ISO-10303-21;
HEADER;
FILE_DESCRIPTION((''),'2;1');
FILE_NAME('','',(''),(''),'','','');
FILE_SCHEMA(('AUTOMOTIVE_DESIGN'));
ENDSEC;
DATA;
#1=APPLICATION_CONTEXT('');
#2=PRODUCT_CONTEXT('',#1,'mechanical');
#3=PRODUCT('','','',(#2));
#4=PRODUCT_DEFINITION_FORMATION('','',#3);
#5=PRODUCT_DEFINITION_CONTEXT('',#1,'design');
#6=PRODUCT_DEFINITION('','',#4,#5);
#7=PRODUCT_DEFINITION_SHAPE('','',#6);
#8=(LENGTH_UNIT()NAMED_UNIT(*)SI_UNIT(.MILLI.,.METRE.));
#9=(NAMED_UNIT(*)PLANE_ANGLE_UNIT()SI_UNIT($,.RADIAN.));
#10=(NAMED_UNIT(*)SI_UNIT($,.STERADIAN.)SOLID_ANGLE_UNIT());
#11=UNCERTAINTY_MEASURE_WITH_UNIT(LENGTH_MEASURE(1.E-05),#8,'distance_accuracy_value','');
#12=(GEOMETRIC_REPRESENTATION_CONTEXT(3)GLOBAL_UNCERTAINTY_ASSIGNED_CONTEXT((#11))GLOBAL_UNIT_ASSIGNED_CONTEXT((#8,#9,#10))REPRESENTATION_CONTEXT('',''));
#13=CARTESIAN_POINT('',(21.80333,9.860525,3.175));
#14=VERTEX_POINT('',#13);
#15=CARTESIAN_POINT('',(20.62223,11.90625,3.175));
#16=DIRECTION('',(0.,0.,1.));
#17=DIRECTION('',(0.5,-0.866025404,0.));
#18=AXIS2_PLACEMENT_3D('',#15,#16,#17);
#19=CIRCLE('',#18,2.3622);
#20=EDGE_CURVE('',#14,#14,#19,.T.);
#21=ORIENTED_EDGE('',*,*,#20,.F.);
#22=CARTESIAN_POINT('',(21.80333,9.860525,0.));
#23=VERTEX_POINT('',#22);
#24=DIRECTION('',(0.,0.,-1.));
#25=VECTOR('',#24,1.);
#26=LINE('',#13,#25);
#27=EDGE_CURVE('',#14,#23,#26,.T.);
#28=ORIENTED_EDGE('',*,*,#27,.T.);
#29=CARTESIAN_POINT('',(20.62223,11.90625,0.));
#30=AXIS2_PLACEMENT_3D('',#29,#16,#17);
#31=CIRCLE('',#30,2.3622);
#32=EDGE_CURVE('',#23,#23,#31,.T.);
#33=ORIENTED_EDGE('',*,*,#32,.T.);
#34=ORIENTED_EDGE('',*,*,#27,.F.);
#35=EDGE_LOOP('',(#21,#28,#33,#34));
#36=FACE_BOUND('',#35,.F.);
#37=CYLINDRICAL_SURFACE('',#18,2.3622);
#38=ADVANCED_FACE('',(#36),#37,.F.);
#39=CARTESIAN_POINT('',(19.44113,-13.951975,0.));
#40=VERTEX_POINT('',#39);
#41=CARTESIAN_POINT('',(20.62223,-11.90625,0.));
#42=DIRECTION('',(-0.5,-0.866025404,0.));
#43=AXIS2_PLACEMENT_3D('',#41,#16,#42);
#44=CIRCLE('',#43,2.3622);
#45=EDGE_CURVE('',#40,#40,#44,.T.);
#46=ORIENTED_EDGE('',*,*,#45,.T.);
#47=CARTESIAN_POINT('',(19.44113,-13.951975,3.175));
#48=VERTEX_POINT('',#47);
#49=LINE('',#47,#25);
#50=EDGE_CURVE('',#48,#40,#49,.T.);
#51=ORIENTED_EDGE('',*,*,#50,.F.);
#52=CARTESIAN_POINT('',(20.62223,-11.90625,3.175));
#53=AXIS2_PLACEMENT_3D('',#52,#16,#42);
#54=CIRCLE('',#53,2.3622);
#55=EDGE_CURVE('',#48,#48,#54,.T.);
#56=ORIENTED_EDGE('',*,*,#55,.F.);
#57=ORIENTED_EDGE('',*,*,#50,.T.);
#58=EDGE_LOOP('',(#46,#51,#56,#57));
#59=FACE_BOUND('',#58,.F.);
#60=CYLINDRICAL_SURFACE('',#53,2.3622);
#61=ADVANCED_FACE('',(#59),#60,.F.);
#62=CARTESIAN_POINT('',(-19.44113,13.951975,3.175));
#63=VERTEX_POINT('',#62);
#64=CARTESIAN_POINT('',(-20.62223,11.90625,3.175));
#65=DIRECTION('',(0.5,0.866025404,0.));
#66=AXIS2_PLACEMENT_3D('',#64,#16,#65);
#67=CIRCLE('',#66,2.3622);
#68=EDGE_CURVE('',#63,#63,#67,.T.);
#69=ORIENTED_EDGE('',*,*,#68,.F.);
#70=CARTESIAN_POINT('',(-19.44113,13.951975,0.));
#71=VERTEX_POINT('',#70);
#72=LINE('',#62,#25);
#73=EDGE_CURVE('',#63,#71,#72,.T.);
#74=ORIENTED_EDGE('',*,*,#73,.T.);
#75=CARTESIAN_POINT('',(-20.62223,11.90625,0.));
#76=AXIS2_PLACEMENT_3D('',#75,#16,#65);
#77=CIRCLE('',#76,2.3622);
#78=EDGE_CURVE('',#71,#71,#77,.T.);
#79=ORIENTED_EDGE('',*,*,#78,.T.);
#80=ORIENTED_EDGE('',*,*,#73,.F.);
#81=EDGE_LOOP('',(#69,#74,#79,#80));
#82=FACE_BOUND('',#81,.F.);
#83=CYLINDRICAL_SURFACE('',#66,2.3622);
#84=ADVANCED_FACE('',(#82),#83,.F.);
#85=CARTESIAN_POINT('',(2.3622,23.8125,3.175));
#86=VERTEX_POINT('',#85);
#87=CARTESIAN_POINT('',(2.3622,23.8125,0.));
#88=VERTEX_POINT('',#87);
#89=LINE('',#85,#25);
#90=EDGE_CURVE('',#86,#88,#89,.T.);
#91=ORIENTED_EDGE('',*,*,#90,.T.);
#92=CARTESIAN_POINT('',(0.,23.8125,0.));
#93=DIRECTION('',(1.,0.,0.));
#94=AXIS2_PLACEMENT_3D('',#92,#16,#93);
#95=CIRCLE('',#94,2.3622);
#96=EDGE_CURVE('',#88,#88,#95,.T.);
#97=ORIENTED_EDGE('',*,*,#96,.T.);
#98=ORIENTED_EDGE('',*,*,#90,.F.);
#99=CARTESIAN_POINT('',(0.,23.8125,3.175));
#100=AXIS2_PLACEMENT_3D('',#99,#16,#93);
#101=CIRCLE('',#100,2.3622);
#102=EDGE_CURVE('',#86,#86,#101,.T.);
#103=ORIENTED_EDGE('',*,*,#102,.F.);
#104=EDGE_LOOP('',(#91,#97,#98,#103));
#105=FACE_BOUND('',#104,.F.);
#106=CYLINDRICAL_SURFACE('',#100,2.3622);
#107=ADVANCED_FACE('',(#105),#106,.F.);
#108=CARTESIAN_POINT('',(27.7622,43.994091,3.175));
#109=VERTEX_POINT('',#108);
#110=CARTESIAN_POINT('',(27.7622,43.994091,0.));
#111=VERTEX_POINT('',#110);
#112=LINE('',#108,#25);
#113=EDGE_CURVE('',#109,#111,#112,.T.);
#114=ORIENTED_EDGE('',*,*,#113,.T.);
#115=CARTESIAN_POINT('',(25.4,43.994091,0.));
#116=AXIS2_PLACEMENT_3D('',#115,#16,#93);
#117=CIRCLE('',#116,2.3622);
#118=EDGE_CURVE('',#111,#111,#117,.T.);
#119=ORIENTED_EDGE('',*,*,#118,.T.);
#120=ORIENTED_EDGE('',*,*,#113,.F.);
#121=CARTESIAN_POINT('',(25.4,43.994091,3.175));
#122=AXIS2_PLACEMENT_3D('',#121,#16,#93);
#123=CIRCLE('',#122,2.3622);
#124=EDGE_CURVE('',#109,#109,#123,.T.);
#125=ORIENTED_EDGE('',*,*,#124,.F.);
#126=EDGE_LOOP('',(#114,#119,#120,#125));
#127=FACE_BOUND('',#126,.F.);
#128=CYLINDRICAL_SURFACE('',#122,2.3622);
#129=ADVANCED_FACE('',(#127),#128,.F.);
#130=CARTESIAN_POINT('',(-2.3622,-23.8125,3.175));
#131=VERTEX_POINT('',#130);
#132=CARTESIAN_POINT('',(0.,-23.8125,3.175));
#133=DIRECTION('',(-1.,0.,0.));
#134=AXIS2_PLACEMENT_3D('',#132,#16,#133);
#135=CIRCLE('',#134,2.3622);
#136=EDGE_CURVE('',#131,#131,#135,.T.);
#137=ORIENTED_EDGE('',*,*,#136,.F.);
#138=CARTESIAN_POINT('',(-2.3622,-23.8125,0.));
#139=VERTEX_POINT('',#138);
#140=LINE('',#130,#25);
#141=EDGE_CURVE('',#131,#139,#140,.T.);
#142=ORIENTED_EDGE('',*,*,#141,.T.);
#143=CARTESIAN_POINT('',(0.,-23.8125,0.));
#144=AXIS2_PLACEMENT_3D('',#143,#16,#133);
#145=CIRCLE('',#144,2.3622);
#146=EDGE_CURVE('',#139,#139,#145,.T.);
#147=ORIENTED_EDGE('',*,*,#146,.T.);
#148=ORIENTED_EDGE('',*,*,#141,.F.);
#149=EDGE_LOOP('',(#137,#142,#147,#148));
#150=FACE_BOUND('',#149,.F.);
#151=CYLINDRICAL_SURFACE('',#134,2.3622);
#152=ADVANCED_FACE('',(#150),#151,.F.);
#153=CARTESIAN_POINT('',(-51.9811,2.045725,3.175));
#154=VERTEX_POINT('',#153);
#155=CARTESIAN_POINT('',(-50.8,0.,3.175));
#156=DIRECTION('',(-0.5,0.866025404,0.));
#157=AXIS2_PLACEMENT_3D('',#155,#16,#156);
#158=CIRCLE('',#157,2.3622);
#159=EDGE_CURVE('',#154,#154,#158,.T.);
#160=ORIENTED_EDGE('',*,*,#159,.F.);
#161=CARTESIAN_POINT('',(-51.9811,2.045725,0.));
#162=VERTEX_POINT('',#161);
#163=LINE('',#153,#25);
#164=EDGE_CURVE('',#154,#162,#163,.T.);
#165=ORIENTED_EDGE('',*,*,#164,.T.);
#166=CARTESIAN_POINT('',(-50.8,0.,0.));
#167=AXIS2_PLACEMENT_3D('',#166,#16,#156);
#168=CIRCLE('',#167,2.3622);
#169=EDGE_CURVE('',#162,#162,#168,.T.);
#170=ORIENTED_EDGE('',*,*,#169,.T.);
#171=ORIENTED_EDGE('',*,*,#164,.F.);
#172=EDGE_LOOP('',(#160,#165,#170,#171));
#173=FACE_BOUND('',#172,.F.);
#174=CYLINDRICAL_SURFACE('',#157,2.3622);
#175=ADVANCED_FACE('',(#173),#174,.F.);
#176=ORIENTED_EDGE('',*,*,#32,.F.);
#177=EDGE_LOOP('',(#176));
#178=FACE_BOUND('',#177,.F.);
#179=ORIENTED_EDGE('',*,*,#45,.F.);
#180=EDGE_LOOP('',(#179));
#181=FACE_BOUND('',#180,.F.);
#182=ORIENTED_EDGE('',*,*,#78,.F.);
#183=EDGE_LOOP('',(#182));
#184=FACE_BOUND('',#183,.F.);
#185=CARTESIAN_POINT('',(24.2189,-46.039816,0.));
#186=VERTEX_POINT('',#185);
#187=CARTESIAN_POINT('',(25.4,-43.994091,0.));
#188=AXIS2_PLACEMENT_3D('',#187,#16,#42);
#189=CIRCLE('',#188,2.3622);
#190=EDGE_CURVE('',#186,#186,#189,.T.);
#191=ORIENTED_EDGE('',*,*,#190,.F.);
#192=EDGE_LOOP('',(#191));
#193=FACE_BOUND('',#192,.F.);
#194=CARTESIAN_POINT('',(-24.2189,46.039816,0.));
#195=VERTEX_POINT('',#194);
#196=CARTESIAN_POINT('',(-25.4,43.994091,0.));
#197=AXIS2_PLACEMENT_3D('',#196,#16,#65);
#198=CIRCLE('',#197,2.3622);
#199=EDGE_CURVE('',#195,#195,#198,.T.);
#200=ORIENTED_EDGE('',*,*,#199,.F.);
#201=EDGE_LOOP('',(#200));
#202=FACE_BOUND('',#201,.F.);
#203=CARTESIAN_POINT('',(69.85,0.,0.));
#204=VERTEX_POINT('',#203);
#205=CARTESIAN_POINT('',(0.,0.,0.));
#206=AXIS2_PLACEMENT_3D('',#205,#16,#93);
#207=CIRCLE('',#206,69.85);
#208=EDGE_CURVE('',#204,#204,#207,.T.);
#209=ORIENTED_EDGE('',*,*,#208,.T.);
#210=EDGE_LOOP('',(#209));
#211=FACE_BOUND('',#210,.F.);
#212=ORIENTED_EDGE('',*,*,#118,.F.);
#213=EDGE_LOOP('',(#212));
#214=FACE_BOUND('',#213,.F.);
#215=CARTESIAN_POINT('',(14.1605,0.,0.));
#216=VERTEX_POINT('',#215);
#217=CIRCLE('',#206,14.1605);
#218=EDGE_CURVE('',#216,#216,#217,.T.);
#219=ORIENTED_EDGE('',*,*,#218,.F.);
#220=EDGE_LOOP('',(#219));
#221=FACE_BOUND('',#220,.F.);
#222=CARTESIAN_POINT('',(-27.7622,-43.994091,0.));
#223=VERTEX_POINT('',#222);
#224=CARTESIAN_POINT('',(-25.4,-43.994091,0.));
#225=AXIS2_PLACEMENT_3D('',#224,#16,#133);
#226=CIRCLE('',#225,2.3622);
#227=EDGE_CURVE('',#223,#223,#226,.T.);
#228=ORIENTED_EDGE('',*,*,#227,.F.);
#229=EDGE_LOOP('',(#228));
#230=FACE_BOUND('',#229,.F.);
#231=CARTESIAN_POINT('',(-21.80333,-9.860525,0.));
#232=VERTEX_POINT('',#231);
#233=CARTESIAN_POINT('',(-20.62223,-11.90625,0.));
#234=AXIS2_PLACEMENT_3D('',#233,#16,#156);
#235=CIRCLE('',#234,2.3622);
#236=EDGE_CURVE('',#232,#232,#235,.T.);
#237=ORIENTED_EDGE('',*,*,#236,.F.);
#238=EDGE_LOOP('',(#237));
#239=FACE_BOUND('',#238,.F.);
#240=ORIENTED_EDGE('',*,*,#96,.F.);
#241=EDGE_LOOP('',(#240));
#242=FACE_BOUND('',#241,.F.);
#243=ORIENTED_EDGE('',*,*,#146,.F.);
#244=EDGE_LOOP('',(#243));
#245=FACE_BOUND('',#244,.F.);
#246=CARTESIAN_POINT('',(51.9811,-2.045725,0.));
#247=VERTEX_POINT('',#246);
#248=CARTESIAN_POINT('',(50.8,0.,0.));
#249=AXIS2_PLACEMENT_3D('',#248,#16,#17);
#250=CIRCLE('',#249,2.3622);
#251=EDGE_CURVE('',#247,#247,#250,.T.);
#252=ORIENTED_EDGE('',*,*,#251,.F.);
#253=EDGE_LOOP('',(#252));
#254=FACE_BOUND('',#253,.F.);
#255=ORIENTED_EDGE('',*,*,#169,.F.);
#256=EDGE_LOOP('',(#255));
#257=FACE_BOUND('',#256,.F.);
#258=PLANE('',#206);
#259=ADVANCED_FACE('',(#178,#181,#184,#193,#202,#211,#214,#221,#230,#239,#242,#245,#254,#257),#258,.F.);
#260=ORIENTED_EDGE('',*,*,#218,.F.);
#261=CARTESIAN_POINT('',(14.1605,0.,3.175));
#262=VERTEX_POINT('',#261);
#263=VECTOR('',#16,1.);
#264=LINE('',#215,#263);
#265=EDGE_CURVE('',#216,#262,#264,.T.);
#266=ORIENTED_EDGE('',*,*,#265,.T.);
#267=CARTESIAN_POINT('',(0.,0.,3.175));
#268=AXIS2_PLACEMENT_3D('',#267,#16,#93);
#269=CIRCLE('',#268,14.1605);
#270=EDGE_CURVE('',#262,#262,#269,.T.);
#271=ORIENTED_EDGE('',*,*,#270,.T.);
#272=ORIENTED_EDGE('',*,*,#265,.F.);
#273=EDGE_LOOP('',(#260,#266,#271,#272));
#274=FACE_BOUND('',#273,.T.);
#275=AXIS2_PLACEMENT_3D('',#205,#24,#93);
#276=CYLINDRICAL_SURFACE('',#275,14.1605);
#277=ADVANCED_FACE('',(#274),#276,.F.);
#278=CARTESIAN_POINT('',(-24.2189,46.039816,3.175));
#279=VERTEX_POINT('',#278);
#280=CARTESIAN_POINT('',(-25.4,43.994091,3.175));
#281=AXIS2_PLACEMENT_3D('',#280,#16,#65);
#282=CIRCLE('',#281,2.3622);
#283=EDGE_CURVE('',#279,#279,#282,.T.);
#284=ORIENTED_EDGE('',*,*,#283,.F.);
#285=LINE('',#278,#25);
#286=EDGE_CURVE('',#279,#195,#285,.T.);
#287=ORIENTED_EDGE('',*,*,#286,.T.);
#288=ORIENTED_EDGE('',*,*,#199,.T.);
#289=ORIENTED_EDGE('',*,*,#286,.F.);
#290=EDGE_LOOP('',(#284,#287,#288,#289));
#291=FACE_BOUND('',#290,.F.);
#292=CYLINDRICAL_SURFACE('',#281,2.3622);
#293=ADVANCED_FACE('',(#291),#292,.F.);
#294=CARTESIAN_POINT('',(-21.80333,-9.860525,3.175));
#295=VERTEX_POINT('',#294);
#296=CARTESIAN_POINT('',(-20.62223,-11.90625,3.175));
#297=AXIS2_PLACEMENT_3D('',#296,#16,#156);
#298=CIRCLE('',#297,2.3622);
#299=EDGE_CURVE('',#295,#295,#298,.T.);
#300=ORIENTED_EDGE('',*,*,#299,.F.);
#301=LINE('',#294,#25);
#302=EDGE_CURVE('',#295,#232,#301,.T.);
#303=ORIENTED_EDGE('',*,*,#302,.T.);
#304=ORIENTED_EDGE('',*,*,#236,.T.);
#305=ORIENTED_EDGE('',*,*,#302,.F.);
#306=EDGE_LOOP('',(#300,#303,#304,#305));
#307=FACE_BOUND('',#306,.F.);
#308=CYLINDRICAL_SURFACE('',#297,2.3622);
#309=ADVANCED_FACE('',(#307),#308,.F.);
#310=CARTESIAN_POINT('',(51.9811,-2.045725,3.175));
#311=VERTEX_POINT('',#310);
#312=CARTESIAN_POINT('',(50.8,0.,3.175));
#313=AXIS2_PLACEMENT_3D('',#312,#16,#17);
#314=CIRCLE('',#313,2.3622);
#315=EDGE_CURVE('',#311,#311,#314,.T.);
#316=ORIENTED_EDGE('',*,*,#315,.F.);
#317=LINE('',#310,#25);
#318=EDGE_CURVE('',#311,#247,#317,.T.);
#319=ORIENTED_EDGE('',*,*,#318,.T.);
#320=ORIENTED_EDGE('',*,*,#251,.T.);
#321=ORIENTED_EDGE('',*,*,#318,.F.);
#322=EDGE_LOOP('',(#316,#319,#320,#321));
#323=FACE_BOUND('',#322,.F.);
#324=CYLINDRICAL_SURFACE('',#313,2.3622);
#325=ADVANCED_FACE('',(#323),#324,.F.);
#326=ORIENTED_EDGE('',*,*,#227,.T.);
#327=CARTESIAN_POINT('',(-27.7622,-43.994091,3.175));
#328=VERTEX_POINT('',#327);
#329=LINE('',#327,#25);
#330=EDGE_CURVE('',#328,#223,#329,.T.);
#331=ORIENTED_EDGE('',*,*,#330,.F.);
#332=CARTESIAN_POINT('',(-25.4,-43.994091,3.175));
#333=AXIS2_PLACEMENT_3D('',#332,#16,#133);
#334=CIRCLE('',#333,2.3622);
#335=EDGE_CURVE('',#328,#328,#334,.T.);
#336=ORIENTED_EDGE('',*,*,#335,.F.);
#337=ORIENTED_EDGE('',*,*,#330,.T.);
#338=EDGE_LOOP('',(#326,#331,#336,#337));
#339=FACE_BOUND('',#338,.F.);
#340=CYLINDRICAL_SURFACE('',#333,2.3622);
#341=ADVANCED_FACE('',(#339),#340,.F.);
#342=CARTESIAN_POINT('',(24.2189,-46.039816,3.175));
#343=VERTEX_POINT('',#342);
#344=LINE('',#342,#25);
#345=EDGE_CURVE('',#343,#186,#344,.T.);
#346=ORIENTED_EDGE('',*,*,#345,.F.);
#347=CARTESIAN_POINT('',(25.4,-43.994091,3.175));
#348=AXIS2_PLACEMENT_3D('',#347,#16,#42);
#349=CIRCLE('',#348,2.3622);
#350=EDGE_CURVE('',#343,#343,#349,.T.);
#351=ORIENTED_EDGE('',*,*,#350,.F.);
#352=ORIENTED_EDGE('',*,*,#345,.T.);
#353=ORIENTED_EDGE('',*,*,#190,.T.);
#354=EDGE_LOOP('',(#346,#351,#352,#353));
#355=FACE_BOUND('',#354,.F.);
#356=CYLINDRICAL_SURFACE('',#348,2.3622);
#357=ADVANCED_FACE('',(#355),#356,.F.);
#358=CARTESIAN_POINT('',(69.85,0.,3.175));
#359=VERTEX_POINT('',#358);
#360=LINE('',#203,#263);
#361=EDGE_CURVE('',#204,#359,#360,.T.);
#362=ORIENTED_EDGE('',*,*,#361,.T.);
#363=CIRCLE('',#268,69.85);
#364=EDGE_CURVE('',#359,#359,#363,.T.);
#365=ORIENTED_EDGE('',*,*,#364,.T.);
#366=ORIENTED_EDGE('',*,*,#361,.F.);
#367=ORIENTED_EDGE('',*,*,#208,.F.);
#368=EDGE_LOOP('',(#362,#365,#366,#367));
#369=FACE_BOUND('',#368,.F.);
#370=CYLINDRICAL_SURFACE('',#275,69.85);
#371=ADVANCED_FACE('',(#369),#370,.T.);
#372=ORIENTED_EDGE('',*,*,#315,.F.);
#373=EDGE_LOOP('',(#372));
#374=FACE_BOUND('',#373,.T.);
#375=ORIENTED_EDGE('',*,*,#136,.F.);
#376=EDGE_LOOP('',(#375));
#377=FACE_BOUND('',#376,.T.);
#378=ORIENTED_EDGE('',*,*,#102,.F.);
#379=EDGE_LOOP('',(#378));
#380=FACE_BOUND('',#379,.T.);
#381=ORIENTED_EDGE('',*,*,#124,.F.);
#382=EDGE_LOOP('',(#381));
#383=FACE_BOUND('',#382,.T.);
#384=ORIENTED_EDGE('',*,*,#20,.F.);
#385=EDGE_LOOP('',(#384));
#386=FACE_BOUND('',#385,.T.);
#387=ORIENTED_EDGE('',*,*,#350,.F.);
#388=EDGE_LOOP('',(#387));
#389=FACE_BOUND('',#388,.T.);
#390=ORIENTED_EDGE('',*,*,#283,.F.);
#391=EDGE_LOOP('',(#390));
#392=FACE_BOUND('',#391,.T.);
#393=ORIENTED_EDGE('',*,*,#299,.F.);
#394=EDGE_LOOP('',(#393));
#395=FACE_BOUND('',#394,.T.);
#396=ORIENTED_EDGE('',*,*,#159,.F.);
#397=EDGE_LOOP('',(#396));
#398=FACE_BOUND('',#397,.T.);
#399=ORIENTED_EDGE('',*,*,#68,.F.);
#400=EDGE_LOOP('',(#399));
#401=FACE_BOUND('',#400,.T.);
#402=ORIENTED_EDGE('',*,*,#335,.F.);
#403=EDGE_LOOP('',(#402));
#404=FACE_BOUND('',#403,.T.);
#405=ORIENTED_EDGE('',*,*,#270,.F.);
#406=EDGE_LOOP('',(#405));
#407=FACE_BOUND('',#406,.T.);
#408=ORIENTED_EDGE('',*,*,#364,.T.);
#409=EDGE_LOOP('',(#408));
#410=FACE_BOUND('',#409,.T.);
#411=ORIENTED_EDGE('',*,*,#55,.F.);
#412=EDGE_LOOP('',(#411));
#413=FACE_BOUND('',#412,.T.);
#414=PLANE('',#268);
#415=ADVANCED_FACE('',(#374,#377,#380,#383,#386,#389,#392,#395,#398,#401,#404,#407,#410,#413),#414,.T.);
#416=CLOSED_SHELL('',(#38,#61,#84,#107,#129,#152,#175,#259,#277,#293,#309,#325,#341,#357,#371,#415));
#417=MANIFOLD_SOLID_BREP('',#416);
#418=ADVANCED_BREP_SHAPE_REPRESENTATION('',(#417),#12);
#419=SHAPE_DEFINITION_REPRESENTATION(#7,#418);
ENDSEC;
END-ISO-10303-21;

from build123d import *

# Parameters (mm, degrees)
F0_R            = 69.85
F0_R_2          = 14.1605
F1_DEPTH        = 3.175
F2_R            = 2.3622
F3_DEPTH        = 3.176
F3_COPIES_COUNT = 6


# Not quite as in the source:
# - a pattern or mirror of a feature is missing from the dataset's text; its kind, count and spacing are read off the source's solid


with BuildPart() as f1:
    # F0 (on Top) → F1 (new body)
    with BuildSketch(Plane.XY):
        Circle(F0_R)
        Circle(F0_R_2, mode=Mode.SUBTRACT)
    extrude(amount=F1_DEPTH)

    # F2 (on face) → F3 (cut, through all)
    with BuildSketch(Plane.XY.offset(3.175)):
        with Locations((0, 23.8125)):
            Circle(F2_R)
        with Locations((25.4, 43.9940905122)):
            Circle(F2_R)
    f3 = extrude(amount=-F3_DEPTH, mode=Mode.SUBTRACT)

    # F3_copies: F3 ×6 about axis
    f3_copies_axis = Axis((0, 0, 0), (0, 0, 1))
    for i in range(1, F3_COPIES_COUNT):
        add(f3.rotate(f3_copies_axis, i * 360 / F3_COPIES_COUNT), mode=Mode.SUBTRACT)


solid = f1.part
